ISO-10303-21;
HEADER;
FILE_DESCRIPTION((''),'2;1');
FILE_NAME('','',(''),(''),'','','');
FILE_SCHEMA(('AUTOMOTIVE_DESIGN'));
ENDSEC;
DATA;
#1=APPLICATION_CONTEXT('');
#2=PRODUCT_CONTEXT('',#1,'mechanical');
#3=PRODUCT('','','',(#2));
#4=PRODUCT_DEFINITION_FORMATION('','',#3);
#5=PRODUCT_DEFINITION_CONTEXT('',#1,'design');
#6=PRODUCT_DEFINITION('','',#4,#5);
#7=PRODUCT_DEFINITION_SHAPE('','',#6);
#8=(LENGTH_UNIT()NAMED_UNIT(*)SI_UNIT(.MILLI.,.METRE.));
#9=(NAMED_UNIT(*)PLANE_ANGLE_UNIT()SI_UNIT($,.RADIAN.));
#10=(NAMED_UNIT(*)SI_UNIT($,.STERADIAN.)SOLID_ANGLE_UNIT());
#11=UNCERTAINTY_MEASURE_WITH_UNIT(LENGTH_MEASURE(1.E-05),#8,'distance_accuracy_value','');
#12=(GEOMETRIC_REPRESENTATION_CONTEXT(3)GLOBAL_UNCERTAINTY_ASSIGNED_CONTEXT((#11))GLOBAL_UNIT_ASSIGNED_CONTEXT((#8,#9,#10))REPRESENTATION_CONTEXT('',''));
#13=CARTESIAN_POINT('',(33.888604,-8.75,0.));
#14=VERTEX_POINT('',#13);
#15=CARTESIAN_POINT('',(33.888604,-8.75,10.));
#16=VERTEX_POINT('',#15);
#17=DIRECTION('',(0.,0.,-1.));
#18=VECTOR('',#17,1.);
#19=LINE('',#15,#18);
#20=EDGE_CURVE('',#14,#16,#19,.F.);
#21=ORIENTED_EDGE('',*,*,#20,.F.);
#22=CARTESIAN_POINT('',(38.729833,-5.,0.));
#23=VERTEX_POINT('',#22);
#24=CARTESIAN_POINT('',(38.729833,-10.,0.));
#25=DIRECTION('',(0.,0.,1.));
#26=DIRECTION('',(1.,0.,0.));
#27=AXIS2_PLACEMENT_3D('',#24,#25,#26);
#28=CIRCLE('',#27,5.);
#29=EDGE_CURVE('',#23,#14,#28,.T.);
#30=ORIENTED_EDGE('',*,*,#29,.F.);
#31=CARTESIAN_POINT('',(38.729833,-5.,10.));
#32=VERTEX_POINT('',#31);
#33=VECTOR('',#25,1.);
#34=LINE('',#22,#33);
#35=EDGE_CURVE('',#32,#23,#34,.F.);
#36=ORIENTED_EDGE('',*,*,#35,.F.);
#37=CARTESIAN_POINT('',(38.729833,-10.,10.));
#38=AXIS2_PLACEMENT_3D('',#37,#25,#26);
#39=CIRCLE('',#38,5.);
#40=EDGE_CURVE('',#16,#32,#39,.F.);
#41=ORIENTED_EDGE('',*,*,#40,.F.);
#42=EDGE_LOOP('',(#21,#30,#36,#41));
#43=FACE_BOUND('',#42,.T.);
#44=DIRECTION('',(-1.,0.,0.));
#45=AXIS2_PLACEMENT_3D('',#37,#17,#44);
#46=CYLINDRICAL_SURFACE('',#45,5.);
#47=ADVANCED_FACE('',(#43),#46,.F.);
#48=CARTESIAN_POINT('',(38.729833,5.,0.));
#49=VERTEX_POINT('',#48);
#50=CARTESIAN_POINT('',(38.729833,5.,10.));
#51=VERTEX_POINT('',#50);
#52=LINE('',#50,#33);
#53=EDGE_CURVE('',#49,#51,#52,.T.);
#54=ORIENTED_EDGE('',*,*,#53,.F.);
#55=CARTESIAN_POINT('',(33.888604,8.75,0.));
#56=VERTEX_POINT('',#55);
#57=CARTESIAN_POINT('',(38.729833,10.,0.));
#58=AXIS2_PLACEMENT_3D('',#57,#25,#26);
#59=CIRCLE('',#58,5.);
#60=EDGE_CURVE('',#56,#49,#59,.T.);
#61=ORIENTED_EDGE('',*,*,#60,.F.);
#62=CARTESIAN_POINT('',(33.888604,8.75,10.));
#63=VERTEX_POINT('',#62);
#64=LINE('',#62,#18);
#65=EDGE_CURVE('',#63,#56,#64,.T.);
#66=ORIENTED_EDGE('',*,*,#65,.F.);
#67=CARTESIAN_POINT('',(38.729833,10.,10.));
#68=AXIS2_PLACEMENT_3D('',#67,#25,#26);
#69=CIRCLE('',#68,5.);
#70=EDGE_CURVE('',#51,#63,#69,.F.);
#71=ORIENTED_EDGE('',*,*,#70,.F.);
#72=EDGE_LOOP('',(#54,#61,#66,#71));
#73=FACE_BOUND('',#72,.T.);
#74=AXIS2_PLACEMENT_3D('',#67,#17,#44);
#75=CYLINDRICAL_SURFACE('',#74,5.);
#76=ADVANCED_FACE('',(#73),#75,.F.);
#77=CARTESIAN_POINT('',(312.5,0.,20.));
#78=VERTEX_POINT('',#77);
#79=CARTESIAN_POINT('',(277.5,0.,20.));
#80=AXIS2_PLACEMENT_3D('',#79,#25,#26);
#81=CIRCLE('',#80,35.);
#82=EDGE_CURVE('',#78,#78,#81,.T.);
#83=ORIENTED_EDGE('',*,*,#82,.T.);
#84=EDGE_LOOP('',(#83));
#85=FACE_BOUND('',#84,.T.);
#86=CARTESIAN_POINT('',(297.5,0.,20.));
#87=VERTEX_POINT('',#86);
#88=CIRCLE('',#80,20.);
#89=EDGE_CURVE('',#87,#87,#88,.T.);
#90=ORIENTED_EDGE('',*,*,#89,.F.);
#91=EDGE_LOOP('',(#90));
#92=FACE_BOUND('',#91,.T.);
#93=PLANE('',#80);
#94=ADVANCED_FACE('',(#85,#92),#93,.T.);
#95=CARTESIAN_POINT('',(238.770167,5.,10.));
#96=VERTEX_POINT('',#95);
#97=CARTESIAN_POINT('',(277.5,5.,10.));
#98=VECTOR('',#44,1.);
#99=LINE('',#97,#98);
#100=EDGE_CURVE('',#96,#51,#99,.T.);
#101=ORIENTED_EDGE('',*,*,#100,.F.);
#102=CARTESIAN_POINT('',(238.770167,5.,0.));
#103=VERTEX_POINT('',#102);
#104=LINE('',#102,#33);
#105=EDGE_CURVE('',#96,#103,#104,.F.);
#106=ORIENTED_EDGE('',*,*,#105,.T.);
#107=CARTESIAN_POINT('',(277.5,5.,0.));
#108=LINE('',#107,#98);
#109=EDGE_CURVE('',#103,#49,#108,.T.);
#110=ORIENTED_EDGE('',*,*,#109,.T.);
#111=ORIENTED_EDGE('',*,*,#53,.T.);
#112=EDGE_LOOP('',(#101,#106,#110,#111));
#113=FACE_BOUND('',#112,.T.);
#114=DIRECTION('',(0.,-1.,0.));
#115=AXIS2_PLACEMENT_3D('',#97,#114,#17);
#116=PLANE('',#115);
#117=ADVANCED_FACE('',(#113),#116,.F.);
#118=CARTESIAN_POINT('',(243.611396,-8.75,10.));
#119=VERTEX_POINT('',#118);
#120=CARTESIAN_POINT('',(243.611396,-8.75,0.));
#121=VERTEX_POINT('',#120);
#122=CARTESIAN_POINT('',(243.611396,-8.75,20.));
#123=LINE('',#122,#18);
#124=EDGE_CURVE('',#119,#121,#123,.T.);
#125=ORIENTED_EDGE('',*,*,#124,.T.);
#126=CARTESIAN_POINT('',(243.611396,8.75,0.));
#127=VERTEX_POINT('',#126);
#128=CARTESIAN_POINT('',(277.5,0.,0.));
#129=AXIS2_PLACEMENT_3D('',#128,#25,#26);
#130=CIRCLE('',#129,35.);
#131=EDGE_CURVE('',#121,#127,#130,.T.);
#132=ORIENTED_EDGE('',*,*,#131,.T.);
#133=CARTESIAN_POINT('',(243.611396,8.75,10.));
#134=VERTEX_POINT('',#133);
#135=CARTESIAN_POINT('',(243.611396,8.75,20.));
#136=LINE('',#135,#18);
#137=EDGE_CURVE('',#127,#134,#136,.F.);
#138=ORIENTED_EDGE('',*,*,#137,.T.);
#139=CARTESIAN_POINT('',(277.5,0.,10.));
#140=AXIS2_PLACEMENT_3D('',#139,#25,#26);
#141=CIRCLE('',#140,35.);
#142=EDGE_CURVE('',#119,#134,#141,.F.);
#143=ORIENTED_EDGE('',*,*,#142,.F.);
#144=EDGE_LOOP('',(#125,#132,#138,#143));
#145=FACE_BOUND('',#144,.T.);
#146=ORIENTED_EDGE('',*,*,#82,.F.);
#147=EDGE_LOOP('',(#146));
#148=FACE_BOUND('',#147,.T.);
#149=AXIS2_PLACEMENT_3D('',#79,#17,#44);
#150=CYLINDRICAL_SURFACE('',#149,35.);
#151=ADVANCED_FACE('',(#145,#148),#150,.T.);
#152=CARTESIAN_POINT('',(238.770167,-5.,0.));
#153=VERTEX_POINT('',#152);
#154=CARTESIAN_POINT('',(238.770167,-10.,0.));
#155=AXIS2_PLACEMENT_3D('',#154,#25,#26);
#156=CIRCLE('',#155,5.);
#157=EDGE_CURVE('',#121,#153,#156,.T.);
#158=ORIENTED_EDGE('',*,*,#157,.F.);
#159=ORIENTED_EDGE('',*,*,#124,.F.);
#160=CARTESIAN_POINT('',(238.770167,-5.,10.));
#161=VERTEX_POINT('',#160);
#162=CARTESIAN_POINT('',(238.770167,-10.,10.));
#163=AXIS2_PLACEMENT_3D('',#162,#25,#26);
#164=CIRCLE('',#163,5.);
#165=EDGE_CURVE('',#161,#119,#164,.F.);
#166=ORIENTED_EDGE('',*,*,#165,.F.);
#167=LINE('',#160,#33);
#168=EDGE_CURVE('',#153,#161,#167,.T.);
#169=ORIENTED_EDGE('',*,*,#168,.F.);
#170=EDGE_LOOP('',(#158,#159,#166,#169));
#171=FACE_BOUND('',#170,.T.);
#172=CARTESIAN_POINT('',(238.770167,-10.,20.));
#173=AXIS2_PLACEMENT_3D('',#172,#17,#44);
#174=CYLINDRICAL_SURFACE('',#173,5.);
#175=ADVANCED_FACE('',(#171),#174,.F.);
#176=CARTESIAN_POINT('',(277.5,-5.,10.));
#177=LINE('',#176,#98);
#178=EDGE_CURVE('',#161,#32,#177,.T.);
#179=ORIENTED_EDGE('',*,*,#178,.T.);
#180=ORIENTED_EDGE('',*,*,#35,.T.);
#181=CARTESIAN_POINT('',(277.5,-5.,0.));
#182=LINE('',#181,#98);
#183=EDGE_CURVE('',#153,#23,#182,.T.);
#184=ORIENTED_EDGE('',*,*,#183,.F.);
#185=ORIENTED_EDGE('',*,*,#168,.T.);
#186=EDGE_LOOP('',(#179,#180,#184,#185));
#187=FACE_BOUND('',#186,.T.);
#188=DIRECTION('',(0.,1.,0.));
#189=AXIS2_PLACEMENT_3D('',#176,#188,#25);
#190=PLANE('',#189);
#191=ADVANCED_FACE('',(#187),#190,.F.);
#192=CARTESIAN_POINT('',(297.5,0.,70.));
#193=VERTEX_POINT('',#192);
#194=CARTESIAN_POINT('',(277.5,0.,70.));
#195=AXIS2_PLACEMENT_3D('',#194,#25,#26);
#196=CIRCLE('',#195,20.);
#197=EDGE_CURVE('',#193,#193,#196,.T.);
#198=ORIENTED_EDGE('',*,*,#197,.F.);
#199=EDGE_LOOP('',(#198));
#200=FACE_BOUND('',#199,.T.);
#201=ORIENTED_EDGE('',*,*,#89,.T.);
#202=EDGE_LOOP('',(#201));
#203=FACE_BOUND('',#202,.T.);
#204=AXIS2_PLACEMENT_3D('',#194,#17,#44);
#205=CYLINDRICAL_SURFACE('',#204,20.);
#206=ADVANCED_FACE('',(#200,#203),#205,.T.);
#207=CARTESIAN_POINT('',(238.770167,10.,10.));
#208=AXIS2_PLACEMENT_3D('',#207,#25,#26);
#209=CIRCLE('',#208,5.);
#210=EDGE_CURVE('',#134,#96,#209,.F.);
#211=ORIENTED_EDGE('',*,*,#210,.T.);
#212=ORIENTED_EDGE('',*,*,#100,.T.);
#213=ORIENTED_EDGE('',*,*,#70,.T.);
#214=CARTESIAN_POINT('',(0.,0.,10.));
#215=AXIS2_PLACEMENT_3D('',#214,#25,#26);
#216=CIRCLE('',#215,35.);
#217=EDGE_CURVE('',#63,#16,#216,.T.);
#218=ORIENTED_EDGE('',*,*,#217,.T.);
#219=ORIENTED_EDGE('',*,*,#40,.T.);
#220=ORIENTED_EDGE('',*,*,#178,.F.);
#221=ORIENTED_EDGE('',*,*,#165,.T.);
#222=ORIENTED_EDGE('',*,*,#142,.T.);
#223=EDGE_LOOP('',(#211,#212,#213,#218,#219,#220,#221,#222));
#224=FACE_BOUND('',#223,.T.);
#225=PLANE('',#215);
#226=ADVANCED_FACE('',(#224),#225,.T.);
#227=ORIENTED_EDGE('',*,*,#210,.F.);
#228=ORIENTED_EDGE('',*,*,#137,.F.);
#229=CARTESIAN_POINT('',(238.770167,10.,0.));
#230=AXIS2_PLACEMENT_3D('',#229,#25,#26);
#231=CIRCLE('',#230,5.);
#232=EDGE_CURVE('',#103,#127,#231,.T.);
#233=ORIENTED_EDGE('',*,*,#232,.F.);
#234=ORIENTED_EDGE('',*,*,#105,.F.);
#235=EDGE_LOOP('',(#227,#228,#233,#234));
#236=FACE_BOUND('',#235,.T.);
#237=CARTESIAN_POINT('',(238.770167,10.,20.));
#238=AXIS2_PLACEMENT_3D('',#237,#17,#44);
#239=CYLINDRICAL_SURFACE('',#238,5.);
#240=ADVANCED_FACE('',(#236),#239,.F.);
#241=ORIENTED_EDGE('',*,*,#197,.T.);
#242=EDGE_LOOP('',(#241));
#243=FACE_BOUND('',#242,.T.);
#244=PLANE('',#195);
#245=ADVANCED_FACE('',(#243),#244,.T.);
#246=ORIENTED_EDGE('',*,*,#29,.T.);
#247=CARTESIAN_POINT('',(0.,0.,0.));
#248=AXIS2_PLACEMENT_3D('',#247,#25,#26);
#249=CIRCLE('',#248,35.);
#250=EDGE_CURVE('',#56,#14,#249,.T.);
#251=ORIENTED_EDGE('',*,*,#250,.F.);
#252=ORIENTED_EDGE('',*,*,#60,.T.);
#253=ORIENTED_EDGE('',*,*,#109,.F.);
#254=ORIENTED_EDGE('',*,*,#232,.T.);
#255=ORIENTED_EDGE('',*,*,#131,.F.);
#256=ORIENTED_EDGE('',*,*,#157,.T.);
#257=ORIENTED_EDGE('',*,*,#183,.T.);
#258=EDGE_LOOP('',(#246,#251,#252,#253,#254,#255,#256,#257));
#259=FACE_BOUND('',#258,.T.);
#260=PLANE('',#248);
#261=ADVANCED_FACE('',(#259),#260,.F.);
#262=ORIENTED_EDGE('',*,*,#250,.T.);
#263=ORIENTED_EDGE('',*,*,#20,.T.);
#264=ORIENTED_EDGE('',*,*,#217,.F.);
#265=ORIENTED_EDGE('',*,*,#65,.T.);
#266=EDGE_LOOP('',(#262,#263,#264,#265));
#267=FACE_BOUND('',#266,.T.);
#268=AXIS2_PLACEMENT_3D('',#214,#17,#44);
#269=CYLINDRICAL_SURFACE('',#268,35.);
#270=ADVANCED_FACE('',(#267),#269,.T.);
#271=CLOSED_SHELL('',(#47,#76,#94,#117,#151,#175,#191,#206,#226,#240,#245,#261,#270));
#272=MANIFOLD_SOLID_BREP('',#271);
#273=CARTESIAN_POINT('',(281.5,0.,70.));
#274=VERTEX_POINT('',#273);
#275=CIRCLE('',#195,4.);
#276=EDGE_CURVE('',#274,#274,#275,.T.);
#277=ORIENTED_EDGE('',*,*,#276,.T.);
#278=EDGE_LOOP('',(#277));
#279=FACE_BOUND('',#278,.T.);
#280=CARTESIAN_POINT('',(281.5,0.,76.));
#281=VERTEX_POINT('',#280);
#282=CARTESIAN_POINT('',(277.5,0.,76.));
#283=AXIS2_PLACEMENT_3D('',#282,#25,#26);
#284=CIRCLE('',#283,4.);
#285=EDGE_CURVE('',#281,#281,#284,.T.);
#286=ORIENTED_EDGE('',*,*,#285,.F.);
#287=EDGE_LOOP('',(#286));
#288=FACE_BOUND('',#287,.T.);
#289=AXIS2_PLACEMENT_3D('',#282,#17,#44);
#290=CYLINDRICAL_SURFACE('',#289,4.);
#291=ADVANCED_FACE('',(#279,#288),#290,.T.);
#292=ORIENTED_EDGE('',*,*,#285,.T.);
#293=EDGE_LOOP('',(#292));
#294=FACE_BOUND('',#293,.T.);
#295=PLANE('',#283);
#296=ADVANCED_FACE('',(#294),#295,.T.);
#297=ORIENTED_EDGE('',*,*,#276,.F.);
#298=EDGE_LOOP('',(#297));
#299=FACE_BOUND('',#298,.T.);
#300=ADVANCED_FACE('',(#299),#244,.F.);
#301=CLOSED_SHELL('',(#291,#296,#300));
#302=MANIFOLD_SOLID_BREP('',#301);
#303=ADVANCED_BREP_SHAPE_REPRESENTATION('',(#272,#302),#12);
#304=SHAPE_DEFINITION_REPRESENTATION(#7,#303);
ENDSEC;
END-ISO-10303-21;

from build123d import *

# Parameters (mm, degrees)
ESBO_O1_R                     = 35
RESSALTO_EXTRUS_O1_DEPTH      = 10
ESBO_O4_W                     = 10
ESBO_O4_H                     = 10
RESSALTO_EXTRUS_O2_DEPTH      = 277.5
FILETE3_R                     = 5
FILETE4_R                     = 5
RESSALTO_EXTRUS_O3_DEPTH      = 10
RESSALTO_EXTRUS_O3_DEPTH_BACK = 10
ESBO_O6_R                     = 35
FILETE5_R                     = 5
FILETE6_R                     = 5
ESBO_O7_R                     = 20
RESSALTO_EXTRUS_O4_DEPTH      = 50
SMLINK_BETA_CIRCLE_R          = 4
SMLINK_BETA_CYLINDER_DEPTH    = 6


with BuildPart() as part:
    # Esboço1 → Ressalto-extrusão1 (new body)
    with BuildSketch(Plane(origin=(0, 0, 0), x_dir=(0, 1, 0), z_dir=(0, 0, 1))):
        with Locations(Location((0, 0, 0), (0, 0, 270))):
            Circle(ESBO_O1_R)
    extrude(amount=RESSALTO_EXTRUS_O1_DEPTH)

    # Esboço4 → Ressalto-extrusão2 (add)
    with BuildSketch(Plane.YZ):
        with Locations((0, 5)):
            Rectangle(ESBO_O4_W, ESBO_O4_H)
    extrude(amount=RESSALTO_EXTRUS_O2_DEPTH)

    # Filete3
    filete3_edges = [part.edges().sort_by_distance(p)[0] for p in [
        (34.641016151, -5, 5),
    ]]
    fillet(filete3_edges, radius=FILETE3_R)

    # Filete4
    filete4_edges = [part.edges().sort_by_distance(p)[0] for p in [
        (34.641016151, 5, 5),
    ]]
    fillet(filete4_edges, radius=FILETE4_R)

    # Esboço6 → Ressalto-extrusão3 (add, two sides: drawn at the far end of the back side and taken through both)
    with BuildSketch(Plane.XY.offset(10).offset(-RESSALTO_EXTRUS_O3_DEPTH_BACK)):
        with Locations(Location((277.5, 0, 0), (0, 0, 171.786789298))):
            Circle(ESBO_O6_R)
    extrude(amount=RESSALTO_EXTRUS_O3_DEPTH + RESSALTO_EXTRUS_O3_DEPTH_BACK)

    # Filete5
    filete5_edges = [part.edges().sort_by_distance(p)[0] for p in [
        (242.858983849, -5, 5),
    ]]
    fillet(filete5_edges, radius=FILETE5_R)

    # Filete6
    # the kernel refuses this fillet: 5 mm, written as the material it adds along each edge
    with BuildSketch(Plane(origin=(242.858983849, 5, 10), x_dir=(0.1967224418008006, 0.9804592193925918, 0), z_dir=(0, 0, -1))) as filete6_piece_1:
        with BuildLine():
            CenterArc((4.097933971, -4.992530838), FILETE6_R, 93.132150742, 75.522487814)
            Line((-0.804362126, -4.008918629), (0, 0))
            ThreePointArc((0, 0), (1.912369187, -0.052284136), (3.824738373, 0))
        make_face()
    extrude(amount=10)

    # Esboço7 → Ressalto-extrusão4 (add)
    with BuildSketch(Plane.XY.offset(20)):
        with Locations((277.5, 0)):
            Circle(ESBO_O7_R)
    extrude(amount=RESSALTO_EXTRUS_O4_DEPTH)


with BuildPart() as body_2:
    # SMLINK_BETA_CIRCLE → SMLINK_BETA_CYLINDER (new body)
    with BuildSketch(Plane(origin=(0, 0, 70), x_dir=(0, 1, 0), z_dir=(0, 0, 1))):
        with Locations(Location((0, -277.5, 0), (0, 0, 270))):
            Circle(SMLINK_BETA_CIRCLE_R)
    extrude(amount=SMLINK_BETA_CYLINDER_DEPTH)


solid = Compound([part.part, body_2.part])
